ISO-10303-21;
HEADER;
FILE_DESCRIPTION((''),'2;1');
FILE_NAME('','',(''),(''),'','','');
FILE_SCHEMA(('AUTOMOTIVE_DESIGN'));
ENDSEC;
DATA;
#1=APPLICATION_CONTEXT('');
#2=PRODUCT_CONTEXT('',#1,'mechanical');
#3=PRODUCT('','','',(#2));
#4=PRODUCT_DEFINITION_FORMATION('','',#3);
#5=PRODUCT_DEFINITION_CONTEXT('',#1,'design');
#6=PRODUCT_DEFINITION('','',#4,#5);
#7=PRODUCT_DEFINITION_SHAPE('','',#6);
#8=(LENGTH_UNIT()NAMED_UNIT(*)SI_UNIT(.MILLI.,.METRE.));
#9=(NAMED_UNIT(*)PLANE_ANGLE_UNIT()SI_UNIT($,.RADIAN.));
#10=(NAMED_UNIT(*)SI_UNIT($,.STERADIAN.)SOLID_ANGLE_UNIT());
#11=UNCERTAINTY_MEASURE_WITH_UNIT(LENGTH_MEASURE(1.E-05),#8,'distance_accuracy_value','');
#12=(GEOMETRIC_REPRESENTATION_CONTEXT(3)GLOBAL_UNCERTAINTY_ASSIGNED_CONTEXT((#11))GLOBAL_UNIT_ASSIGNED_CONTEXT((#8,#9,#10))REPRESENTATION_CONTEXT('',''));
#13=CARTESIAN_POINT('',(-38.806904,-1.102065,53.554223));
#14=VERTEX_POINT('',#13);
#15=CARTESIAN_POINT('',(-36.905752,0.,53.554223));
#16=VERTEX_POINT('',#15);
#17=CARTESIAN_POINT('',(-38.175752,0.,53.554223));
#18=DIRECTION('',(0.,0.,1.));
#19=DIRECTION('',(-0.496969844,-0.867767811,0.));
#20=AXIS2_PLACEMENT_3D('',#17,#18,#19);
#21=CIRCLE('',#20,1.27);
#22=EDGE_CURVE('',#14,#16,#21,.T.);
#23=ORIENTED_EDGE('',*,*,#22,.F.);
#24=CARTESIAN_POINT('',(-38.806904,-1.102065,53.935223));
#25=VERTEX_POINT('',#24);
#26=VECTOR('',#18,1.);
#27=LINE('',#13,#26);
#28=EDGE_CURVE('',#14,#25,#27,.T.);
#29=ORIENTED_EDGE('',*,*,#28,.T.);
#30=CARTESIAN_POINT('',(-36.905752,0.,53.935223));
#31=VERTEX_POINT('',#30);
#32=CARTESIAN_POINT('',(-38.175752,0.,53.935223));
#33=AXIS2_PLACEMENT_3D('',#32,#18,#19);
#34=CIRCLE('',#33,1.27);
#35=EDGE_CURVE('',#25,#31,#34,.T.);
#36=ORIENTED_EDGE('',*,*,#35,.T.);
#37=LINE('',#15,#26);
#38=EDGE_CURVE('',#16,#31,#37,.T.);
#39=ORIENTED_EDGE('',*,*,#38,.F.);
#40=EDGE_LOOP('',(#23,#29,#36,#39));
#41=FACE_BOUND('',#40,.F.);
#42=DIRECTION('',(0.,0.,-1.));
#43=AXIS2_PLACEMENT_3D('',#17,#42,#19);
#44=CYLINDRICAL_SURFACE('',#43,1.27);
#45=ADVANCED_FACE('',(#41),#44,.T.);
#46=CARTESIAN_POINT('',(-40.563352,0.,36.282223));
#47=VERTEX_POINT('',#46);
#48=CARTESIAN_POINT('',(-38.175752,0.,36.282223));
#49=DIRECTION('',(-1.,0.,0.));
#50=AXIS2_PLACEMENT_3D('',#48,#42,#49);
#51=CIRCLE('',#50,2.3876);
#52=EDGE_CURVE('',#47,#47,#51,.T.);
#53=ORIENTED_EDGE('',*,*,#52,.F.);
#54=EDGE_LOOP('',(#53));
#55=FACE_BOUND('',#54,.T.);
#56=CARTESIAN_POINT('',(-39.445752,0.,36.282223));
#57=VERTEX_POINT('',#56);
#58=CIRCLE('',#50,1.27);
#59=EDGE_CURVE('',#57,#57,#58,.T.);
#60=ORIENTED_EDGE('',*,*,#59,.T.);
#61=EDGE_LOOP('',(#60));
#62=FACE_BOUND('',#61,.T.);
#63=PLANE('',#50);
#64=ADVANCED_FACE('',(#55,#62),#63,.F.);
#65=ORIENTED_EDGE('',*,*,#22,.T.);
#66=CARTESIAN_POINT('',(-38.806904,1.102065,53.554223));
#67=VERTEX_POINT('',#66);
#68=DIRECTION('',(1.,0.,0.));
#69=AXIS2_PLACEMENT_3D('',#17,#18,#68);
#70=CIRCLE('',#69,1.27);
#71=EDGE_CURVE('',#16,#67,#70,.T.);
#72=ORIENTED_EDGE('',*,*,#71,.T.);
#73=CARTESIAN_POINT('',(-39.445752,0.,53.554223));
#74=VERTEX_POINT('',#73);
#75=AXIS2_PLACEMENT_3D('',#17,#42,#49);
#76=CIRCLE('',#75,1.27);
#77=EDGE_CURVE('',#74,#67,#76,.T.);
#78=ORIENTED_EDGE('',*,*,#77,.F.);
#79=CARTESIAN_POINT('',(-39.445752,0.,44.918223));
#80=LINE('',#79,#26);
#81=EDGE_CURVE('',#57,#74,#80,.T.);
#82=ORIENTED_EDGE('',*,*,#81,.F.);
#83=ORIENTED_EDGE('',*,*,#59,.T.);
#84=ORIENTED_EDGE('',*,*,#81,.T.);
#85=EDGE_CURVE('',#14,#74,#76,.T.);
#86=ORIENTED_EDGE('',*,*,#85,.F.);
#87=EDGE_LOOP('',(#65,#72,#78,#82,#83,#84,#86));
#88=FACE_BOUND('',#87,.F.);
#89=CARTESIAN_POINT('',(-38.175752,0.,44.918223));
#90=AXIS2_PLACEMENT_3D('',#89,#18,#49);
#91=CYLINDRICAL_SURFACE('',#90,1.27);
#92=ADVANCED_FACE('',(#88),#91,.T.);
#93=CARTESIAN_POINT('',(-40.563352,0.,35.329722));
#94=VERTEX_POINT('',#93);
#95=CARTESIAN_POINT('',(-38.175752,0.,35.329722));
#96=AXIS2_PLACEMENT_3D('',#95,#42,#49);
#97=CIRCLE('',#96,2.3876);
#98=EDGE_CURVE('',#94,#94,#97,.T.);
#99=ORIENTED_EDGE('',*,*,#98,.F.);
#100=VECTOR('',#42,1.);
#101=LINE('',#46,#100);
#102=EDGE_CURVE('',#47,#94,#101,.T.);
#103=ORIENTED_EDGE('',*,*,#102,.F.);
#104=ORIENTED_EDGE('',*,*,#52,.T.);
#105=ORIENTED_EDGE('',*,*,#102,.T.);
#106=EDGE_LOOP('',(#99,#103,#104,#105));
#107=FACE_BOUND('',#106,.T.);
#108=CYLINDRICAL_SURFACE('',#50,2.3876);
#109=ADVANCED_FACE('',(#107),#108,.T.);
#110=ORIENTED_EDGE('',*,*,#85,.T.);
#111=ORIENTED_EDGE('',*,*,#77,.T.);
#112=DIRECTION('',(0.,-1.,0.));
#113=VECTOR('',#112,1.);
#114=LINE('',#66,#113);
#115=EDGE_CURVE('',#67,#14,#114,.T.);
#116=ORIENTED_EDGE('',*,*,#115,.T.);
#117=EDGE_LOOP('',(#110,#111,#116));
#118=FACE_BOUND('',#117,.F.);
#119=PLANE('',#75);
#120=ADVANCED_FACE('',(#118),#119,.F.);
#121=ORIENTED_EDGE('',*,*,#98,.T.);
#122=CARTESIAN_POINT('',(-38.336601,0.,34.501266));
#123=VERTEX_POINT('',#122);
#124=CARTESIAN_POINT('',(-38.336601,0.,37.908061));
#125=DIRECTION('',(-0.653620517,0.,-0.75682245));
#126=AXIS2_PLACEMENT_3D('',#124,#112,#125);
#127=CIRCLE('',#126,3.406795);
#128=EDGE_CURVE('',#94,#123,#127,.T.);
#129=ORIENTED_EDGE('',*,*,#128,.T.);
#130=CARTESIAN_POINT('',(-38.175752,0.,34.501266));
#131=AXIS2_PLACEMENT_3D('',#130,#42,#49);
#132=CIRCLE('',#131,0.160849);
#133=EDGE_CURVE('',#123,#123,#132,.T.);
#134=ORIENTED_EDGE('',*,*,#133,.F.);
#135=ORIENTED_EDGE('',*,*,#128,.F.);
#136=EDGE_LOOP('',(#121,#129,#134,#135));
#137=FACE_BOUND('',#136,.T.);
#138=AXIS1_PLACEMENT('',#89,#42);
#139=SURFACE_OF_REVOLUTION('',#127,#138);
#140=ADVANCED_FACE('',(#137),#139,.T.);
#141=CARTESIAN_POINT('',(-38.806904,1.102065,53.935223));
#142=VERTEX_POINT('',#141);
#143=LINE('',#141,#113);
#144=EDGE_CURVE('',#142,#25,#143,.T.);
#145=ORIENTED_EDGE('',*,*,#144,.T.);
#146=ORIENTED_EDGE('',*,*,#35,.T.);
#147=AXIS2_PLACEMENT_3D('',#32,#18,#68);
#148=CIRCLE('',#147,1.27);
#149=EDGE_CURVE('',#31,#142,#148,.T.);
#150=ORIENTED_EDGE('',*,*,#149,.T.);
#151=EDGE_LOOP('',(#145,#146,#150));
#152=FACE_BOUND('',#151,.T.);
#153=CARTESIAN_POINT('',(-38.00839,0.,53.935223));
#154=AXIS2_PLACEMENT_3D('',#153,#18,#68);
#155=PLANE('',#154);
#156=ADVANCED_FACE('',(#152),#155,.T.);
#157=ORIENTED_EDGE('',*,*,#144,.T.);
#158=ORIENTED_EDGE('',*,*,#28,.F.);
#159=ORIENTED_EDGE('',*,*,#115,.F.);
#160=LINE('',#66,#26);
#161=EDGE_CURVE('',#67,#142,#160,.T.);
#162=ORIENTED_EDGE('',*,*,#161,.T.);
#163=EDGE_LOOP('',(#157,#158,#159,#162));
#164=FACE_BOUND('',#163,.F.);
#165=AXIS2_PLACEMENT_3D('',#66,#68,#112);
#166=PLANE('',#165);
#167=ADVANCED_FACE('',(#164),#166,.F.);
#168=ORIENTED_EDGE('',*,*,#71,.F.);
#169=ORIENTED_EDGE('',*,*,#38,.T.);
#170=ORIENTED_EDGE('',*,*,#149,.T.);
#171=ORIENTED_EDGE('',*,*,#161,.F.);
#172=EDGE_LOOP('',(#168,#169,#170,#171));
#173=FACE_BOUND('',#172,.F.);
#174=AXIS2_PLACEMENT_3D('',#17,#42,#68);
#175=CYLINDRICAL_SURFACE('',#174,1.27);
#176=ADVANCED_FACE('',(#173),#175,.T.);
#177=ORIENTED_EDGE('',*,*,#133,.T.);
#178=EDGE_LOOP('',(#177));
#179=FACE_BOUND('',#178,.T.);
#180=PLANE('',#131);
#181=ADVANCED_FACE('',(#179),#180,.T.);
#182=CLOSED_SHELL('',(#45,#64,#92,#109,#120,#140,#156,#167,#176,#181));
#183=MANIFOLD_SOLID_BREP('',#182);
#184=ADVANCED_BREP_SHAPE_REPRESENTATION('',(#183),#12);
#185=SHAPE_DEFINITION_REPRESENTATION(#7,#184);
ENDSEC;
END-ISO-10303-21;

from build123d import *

# Parameters (mm, degrees)
F0_W     = 1.27
F0_H     = 17.272
F3_DEPTH = 0.381


# Not quite as in the source:
# - a feature names something its author has since deleted; it is built from what else it names


with BuildPart() as f1:
    # F0 (on Front) → F1 (revolve)
    with BuildSketch(Plane.XZ):
        with Locations((-38.810752406, 44.918222718)):
            Rectangle(F0_W, F0_H)
        with BuildLine():
            Line((-38.175752406, 36.282222718), (-39.445752406, 36.282222718))
            Line((-39.445752406, 36.282222718), (-40.563352406, 36.282222718))
            Line((-40.563352406, 36.282222718), (-40.563352406, 35.9659250826))
            Line((-40.563352406, 35.9659250826), (-40.563352406, 35.329721868))
            ThreePointArc((-40.563352406, 35.329721868), (-39.5245363872, 34.7150900066), (-38.3366011083, 34.5012657344))
            Line((-38.3366011083, 34.5012657344), (-38.175752406, 34.5012657344))
            Line((-38.175752406, 34.5012657344), (-38.175752406, 35.1264222169))
            Line((-38.175752406, 35.1264222169), (-38.175752406, 36.282222718))
        make_face()
    revolve(axis=Axis((-38.175752406, 0, 44.918222718), (0, 0, -1)))

    # F2 (on face) → F3 (join)
    with BuildSketch(Plane.XY.offset(53.554222718)):
        with BuildLine():
            Line((-38.8069041073, 1.1020651206), (-38.8069041073, 0))
            Line((-38.8069041073, 0), (-38.8069041073, -1.1020651206))
            ThreePointArc((-38.8069041073, -1.1020651206), (-37.5388311631, -1.0987407931), (-36.905752406, 0))
            ThreePointArc((-36.905752406, 0), (-37.5388311631, 1.0987407931), (-38.8069041073, 1.1020651206))
        make_face()
    extrude(amount=F3_DEPTH)


solid = f1.part
